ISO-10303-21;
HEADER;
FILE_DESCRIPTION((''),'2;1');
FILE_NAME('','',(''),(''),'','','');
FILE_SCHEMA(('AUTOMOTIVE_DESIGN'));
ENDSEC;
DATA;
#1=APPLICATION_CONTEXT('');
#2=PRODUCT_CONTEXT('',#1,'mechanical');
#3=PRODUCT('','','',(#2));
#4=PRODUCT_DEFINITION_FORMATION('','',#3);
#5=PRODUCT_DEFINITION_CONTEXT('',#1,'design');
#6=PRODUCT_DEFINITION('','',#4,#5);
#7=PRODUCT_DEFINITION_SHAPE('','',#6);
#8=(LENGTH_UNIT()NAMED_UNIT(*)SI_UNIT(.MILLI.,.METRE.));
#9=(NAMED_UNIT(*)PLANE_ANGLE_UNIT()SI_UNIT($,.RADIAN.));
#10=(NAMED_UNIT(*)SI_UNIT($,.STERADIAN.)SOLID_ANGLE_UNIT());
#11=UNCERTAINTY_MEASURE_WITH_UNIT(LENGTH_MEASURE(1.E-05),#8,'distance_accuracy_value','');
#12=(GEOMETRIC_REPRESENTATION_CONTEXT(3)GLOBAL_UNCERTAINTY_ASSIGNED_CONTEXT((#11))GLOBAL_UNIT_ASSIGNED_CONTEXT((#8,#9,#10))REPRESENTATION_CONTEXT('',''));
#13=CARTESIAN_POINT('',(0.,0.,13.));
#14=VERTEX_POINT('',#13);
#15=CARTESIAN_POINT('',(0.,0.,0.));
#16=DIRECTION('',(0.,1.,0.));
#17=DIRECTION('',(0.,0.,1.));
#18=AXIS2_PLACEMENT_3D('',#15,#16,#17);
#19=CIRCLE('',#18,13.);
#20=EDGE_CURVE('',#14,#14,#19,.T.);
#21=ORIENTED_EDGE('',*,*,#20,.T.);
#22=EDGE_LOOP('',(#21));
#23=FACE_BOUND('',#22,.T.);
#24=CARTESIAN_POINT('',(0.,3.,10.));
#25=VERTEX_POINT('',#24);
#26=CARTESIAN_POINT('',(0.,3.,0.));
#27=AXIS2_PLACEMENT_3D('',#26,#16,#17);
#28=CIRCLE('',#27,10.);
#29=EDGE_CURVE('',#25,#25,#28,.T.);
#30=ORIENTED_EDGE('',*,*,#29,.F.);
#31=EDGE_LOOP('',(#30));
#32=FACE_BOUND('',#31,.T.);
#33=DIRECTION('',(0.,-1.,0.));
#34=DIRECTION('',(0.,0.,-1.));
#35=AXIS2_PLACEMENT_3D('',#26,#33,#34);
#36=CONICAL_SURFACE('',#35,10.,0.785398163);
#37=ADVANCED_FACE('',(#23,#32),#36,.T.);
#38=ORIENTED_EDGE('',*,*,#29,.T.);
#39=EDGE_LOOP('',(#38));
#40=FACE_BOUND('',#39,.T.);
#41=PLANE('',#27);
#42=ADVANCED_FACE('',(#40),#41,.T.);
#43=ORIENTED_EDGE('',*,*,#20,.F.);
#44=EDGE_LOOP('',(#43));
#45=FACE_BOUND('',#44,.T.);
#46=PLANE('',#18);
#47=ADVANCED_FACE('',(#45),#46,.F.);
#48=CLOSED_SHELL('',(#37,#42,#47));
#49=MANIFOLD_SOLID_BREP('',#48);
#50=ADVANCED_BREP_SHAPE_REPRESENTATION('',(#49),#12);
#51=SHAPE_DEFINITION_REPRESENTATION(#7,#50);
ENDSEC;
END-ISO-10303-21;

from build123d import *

# Parameters (mm, degrees)
ESQUISSE1_R        = 13
BOSS_EXTRU_3_DEPTH = 3
CHANFREIN2_SIZE    = 3


with BuildPart() as part:
    # Esquisse1 → Boss.-Extru.3 (new body)
    with BuildSketch(Plane(origin=(0, 0, 0), x_dir=(1, 0, 0), z_dir=(0, 1, 0))):
        with Locations(Location((0, 0, 0), (0, 0, 270))):
            Circle(ESQUISSE1_R)
    extrude(amount=BOSS_EXTRU_3_DEPTH)

    # Chanfrein2
    chanfrein2_edges = [part.edges().sort_by_distance(p)[0] for p in [
        (0, 3, -13),
    ]]
    chamfer(chanfrein2_edges, length=CHANFREIN2_SIZE - 0.0001)  # a hair under: the kernel refuses the full size


solid = part.part
